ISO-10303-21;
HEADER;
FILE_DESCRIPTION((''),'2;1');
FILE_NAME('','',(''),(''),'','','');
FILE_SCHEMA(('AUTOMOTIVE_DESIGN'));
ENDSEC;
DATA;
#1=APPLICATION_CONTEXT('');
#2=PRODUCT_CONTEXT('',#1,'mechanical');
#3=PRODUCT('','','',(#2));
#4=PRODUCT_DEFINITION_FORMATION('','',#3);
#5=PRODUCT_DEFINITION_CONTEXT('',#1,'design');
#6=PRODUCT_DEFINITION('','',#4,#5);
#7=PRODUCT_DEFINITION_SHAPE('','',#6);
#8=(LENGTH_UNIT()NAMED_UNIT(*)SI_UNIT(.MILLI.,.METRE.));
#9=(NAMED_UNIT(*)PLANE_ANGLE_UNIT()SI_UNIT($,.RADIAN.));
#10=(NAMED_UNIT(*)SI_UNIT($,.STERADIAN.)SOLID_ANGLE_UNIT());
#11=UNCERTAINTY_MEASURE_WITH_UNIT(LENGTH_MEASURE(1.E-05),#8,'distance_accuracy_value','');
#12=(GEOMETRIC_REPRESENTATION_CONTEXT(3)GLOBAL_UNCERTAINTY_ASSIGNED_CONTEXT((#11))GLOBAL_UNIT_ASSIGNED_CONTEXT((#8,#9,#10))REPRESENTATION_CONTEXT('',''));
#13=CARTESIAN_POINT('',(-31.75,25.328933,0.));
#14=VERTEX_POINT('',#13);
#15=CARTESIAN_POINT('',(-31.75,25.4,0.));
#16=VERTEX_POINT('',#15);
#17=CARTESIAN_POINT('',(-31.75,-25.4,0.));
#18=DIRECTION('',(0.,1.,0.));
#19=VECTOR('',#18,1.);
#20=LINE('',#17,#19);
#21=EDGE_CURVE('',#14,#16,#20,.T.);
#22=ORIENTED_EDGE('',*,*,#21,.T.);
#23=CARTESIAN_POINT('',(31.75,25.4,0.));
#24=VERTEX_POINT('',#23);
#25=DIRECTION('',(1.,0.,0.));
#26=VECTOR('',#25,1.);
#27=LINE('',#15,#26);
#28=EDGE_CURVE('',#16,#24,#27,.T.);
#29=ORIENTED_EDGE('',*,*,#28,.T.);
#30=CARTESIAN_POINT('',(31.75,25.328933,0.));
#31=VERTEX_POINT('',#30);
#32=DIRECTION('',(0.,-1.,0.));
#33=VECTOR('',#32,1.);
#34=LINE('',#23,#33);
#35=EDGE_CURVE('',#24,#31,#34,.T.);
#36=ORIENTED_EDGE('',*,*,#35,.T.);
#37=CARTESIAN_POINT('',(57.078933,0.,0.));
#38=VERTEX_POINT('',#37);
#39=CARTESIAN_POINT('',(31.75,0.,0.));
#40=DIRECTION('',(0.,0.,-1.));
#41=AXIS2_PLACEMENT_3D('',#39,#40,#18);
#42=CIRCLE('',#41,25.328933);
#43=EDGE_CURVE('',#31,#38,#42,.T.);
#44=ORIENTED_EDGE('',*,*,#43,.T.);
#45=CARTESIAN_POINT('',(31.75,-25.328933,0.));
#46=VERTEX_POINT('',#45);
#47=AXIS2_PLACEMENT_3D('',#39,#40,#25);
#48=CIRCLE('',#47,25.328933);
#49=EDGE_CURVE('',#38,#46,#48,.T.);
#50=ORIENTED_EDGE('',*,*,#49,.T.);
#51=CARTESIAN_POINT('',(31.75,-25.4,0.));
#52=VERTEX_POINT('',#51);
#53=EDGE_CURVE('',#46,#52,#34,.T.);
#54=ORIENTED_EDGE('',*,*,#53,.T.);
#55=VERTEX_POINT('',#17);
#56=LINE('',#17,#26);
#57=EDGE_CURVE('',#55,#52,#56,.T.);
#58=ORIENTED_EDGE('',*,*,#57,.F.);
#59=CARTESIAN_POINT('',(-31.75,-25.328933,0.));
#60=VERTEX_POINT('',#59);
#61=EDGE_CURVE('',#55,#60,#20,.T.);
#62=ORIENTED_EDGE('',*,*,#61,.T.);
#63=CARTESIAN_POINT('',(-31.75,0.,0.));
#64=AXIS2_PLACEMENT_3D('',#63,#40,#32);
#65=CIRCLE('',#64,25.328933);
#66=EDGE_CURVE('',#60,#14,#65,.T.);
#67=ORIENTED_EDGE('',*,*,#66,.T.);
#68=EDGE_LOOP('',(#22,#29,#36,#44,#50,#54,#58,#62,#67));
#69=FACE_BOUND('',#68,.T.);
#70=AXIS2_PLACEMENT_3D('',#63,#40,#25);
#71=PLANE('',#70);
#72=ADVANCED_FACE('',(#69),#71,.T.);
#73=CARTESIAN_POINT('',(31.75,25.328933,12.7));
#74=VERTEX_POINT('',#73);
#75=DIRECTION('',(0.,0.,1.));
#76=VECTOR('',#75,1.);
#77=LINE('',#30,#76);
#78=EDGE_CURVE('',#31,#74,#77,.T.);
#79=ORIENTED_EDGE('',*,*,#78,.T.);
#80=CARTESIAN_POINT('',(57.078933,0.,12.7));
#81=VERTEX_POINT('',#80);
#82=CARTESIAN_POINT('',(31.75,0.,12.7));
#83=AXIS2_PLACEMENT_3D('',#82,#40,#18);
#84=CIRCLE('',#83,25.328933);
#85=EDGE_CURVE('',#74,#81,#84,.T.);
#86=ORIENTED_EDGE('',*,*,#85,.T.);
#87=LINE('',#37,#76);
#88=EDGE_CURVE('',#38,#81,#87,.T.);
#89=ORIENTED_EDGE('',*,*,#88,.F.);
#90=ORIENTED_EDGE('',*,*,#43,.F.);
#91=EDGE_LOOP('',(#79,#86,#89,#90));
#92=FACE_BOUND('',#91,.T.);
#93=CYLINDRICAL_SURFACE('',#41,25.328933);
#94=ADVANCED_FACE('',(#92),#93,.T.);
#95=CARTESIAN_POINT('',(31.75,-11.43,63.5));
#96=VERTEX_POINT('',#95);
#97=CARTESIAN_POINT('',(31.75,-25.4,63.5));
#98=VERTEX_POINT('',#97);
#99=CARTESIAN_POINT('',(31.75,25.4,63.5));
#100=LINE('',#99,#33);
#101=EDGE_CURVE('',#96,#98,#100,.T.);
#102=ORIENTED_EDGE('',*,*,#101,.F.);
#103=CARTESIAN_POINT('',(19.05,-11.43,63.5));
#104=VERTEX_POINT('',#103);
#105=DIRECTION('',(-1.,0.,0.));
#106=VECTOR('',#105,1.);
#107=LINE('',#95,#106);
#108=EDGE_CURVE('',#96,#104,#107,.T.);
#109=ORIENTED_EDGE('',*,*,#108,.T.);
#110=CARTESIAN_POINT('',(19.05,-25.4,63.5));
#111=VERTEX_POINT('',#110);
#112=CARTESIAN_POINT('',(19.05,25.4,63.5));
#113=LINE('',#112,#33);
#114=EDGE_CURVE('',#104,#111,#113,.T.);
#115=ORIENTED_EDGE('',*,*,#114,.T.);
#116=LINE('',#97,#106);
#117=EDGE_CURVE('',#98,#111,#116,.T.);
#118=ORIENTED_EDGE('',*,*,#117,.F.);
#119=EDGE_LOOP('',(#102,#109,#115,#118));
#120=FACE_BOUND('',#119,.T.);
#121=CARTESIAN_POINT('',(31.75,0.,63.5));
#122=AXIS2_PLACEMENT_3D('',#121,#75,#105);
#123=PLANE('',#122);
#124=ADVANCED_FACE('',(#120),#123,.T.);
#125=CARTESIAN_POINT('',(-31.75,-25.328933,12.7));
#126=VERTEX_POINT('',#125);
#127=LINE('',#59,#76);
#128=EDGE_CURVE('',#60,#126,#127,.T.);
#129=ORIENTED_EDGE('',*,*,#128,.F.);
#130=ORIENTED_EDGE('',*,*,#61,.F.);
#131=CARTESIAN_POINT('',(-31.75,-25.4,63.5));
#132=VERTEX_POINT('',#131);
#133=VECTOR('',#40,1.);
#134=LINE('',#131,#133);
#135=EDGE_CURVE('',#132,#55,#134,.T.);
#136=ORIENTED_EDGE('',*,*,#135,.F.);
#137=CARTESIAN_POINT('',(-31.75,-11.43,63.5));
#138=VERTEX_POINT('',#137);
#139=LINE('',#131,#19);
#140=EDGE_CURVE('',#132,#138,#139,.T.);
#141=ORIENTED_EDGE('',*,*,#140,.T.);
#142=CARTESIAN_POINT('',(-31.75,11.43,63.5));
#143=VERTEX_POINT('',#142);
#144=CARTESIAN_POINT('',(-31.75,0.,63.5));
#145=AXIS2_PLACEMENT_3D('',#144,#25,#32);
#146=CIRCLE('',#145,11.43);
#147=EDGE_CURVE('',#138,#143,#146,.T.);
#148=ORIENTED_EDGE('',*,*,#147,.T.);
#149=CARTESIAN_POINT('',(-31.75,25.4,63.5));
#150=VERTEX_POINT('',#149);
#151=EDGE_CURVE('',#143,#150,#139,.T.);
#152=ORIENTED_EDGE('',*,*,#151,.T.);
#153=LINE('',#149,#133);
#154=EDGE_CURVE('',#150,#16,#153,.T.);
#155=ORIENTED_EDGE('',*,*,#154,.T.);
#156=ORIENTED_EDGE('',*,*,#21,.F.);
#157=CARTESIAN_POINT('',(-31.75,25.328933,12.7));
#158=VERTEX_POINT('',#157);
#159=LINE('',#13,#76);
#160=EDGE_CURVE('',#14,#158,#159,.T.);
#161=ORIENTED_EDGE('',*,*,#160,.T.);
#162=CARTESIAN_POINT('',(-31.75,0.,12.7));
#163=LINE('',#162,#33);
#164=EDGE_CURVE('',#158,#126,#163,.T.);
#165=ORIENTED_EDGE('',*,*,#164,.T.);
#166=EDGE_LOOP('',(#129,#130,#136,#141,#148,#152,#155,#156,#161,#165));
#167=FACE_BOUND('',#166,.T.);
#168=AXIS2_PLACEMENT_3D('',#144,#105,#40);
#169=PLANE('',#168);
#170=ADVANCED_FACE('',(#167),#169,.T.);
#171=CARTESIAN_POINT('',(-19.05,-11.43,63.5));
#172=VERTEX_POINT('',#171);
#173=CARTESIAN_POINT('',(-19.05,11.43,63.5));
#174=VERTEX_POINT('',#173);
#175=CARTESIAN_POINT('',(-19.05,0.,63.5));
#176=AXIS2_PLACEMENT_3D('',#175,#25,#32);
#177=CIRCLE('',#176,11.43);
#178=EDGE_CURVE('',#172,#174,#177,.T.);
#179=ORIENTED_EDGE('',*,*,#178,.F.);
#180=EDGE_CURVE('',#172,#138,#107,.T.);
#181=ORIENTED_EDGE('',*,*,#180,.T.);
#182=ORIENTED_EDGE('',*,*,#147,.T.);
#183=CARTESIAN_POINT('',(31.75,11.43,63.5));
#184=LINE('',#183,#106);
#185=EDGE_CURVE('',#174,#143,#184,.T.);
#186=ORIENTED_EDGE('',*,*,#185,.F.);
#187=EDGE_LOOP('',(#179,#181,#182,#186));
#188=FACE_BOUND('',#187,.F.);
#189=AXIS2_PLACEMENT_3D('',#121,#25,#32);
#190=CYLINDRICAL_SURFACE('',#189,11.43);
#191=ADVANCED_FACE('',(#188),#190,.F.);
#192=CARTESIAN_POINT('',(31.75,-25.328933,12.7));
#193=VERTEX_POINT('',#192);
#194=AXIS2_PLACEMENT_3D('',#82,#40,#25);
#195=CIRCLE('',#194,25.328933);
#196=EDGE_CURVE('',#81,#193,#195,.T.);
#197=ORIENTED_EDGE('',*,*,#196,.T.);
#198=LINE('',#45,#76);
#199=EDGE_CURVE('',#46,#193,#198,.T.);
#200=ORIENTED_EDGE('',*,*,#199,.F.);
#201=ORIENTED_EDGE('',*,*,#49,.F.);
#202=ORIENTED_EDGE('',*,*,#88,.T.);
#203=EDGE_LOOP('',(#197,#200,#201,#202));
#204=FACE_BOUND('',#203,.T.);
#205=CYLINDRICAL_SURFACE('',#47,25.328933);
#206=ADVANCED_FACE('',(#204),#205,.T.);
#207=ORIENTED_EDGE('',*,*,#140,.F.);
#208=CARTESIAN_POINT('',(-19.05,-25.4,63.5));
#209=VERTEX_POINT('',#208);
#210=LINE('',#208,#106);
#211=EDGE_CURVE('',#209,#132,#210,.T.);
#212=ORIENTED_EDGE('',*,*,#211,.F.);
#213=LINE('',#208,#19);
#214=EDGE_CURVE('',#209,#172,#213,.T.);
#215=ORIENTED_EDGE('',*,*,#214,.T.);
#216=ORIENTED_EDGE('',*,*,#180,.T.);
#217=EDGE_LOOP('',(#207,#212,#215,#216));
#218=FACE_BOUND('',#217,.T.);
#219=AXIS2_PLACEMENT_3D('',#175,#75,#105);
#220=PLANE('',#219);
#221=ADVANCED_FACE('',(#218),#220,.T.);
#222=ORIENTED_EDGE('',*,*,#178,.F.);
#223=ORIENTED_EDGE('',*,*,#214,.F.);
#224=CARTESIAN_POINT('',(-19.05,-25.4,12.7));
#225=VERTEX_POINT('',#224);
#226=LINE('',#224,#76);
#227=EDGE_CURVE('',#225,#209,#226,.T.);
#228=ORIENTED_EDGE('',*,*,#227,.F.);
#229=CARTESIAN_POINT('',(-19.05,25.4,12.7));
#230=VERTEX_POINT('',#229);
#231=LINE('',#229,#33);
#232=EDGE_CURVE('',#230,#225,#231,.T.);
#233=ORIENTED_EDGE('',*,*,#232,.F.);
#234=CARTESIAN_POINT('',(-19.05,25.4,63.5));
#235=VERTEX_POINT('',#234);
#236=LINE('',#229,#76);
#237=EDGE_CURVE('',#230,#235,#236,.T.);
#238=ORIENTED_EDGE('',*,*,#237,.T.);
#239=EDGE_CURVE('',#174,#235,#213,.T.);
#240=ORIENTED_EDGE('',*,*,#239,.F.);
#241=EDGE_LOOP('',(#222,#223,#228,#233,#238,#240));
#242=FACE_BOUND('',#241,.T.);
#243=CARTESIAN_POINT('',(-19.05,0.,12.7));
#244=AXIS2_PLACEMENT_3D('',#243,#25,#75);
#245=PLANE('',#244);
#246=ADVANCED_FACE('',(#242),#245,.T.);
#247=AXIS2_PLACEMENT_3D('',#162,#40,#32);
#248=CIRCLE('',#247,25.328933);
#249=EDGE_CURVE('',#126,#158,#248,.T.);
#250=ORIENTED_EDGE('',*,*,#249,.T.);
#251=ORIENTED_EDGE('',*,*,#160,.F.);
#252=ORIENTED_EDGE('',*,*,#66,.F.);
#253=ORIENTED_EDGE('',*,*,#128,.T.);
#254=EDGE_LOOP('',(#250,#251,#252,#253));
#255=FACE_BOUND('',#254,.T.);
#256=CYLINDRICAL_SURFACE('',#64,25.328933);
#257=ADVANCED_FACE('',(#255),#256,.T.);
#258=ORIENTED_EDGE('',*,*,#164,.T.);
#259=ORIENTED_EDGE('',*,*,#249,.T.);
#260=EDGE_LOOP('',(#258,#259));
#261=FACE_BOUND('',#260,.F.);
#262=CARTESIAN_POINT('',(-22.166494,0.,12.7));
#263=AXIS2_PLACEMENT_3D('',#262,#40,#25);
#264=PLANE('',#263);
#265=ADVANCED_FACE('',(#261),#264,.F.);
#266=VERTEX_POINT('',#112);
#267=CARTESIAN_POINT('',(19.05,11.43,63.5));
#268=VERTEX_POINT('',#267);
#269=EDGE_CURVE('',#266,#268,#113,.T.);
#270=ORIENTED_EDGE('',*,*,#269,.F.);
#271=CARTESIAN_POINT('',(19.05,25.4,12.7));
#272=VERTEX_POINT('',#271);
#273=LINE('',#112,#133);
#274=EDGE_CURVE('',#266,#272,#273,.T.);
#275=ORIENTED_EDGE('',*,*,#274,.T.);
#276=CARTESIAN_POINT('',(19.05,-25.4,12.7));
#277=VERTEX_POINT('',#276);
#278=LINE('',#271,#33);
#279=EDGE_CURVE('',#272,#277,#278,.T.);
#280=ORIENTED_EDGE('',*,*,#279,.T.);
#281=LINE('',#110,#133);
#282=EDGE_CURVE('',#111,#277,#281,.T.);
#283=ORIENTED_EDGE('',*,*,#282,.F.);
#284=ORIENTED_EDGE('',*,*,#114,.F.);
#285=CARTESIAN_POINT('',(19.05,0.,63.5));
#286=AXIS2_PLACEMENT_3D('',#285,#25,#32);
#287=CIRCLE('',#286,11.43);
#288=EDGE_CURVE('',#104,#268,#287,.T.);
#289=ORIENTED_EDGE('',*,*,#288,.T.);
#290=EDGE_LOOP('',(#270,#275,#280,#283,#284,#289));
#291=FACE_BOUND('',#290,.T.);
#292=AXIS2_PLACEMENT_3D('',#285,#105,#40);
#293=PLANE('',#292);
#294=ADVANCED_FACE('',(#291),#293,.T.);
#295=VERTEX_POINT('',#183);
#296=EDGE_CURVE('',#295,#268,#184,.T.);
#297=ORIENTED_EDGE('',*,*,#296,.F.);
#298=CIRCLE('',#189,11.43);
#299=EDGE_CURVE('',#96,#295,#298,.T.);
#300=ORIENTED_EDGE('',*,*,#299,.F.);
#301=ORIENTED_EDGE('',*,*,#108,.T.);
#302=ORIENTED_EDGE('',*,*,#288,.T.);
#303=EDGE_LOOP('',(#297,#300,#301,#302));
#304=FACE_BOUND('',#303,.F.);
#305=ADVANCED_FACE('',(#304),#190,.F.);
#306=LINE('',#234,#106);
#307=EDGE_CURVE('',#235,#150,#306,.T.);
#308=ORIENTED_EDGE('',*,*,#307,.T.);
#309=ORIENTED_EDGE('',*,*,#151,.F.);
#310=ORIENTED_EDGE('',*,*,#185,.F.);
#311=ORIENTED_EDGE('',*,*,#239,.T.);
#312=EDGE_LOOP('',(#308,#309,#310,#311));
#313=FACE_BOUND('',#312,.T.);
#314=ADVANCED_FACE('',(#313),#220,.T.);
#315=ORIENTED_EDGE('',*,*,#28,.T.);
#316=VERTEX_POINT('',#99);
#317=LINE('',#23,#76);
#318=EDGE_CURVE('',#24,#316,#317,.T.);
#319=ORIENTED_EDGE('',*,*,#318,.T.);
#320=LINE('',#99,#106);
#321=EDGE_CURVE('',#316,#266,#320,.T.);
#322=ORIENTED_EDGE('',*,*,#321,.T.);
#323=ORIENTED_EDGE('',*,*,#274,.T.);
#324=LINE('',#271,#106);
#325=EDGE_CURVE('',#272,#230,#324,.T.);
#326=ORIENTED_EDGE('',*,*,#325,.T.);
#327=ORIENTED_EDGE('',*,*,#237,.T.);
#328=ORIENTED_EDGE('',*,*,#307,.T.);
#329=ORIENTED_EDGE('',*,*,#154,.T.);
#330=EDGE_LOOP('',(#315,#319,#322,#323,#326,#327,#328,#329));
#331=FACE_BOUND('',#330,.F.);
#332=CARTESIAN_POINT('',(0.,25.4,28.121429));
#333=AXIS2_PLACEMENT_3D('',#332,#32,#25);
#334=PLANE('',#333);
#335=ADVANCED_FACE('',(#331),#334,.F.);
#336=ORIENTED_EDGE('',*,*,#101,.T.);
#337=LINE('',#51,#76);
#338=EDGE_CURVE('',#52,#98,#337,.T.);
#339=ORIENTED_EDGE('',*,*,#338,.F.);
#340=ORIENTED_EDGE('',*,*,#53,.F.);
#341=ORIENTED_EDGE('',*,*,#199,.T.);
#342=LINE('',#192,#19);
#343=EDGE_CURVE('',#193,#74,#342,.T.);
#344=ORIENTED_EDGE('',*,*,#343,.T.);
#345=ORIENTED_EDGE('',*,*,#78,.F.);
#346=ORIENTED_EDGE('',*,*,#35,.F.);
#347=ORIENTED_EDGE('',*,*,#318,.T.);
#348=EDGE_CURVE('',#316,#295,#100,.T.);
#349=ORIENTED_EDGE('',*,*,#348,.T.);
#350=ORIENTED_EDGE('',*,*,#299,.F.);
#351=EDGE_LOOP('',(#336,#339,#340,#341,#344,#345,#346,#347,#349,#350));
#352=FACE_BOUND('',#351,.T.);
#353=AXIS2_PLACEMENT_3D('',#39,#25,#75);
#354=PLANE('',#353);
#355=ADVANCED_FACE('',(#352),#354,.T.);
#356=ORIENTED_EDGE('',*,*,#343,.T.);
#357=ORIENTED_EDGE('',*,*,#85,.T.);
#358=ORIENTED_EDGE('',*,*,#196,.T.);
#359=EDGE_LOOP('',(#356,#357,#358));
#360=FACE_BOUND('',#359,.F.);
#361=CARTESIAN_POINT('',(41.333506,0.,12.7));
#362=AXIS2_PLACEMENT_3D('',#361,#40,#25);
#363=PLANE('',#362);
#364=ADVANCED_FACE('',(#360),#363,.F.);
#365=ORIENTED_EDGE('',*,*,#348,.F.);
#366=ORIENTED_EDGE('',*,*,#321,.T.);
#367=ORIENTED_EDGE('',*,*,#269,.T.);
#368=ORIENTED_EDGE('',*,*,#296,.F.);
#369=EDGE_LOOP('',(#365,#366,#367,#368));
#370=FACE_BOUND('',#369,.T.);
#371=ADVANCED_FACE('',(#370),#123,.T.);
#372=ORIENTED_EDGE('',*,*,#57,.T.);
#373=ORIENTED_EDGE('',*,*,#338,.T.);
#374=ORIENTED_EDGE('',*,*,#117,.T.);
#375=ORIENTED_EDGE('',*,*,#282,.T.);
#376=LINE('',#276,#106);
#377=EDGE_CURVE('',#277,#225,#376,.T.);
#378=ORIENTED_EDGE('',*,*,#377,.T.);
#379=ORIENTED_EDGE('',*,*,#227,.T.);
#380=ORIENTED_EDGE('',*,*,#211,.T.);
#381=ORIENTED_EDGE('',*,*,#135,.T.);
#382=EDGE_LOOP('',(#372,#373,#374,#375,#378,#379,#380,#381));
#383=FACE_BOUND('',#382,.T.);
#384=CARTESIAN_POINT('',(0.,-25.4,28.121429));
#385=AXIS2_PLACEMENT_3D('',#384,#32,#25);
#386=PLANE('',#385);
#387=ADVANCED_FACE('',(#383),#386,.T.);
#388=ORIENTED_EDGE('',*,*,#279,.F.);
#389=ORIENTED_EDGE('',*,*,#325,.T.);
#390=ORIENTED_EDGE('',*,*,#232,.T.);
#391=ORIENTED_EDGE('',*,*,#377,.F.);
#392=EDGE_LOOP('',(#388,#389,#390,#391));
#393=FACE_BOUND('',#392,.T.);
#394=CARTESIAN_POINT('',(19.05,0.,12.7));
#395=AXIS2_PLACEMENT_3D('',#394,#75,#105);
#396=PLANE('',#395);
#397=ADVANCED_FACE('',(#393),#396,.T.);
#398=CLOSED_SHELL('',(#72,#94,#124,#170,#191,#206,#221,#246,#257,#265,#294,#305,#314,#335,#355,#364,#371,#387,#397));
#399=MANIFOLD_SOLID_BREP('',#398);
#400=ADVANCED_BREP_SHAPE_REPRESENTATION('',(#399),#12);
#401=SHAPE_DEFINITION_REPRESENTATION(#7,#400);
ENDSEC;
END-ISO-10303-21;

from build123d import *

# Parameters (mm, degrees)
F1_DEPTH = 25.4
F3_DEPTH = 63.501
F5_DEPTH = 12.7


with BuildPart() as f1:
    # F0 (on Front) → F1 (new body, symmetric)
    with BuildSketch(Plane.XZ):
        Polygon((-31.75, 0), (0, 0), (31.75, 0), (31.75, 63.5), (19.05, 63.5), (19.05, 12.7), (0, 12.7), (-19.05, 12.7), (-19.05, 63.5), (-31.75, 63.5), align=None)
    extrude(amount=F1_DEPTH, both=True)

    # F2 (on face) → F3 (cut, through all)
    with BuildSketch(Plane.YZ.offset(31.75)):
        with BuildLine():
            ThreePointArc((-11.43, 63.5), (0, 52.07), (11.43, 63.5))
            Line((11.43, 63.5), (-11.43, 63.5))
        make_face()
    extrude(amount=-F3_DEPTH, mode=Mode.SUBTRACT)

    # F4 (on face) → F5 (join)
    with BuildSketch(Plane(origin=(0, 0, 0), x_dir=(1, 0, 0), z_dir=(0, 0, -1))):
        with BuildLine():
            ThreePointArc((-31.75, -25.3289327497), (-13.8397398924, -17.9102601076), (-6.4210672503, 0))
            ThreePointArc((-6.4210672503, 0), (-13.8397398924, 17.9102601076), (-31.75, 25.3289327497))
            Line((-31.75, 25.3289327497), (-31.75, -25.3289327497))
        make_face()
        with BuildLine():
            Line((-31.75, -25.3289327497), (-31.75, 25.3289327497))
            ThreePointArc((-31.75, 25.3289327497), (-57.0789327497, 0), (-31.75, -25.3289327497))
        make_face()
        with BuildLine():
            ThreePointArc((57.0789327497, 0), (49.6602601076, 17.9102601076), (31.75, 25.3289327497))
            Line((31.75, 25.3289327497), (31.75, -25.3289327497))
            ThreePointArc((31.75, -25.3289327497), (49.6602601076, -17.9102601076), (57.0789327497, 0))
        make_face()
    extrude(amount=-F5_DEPTH)


solid = f1.part
